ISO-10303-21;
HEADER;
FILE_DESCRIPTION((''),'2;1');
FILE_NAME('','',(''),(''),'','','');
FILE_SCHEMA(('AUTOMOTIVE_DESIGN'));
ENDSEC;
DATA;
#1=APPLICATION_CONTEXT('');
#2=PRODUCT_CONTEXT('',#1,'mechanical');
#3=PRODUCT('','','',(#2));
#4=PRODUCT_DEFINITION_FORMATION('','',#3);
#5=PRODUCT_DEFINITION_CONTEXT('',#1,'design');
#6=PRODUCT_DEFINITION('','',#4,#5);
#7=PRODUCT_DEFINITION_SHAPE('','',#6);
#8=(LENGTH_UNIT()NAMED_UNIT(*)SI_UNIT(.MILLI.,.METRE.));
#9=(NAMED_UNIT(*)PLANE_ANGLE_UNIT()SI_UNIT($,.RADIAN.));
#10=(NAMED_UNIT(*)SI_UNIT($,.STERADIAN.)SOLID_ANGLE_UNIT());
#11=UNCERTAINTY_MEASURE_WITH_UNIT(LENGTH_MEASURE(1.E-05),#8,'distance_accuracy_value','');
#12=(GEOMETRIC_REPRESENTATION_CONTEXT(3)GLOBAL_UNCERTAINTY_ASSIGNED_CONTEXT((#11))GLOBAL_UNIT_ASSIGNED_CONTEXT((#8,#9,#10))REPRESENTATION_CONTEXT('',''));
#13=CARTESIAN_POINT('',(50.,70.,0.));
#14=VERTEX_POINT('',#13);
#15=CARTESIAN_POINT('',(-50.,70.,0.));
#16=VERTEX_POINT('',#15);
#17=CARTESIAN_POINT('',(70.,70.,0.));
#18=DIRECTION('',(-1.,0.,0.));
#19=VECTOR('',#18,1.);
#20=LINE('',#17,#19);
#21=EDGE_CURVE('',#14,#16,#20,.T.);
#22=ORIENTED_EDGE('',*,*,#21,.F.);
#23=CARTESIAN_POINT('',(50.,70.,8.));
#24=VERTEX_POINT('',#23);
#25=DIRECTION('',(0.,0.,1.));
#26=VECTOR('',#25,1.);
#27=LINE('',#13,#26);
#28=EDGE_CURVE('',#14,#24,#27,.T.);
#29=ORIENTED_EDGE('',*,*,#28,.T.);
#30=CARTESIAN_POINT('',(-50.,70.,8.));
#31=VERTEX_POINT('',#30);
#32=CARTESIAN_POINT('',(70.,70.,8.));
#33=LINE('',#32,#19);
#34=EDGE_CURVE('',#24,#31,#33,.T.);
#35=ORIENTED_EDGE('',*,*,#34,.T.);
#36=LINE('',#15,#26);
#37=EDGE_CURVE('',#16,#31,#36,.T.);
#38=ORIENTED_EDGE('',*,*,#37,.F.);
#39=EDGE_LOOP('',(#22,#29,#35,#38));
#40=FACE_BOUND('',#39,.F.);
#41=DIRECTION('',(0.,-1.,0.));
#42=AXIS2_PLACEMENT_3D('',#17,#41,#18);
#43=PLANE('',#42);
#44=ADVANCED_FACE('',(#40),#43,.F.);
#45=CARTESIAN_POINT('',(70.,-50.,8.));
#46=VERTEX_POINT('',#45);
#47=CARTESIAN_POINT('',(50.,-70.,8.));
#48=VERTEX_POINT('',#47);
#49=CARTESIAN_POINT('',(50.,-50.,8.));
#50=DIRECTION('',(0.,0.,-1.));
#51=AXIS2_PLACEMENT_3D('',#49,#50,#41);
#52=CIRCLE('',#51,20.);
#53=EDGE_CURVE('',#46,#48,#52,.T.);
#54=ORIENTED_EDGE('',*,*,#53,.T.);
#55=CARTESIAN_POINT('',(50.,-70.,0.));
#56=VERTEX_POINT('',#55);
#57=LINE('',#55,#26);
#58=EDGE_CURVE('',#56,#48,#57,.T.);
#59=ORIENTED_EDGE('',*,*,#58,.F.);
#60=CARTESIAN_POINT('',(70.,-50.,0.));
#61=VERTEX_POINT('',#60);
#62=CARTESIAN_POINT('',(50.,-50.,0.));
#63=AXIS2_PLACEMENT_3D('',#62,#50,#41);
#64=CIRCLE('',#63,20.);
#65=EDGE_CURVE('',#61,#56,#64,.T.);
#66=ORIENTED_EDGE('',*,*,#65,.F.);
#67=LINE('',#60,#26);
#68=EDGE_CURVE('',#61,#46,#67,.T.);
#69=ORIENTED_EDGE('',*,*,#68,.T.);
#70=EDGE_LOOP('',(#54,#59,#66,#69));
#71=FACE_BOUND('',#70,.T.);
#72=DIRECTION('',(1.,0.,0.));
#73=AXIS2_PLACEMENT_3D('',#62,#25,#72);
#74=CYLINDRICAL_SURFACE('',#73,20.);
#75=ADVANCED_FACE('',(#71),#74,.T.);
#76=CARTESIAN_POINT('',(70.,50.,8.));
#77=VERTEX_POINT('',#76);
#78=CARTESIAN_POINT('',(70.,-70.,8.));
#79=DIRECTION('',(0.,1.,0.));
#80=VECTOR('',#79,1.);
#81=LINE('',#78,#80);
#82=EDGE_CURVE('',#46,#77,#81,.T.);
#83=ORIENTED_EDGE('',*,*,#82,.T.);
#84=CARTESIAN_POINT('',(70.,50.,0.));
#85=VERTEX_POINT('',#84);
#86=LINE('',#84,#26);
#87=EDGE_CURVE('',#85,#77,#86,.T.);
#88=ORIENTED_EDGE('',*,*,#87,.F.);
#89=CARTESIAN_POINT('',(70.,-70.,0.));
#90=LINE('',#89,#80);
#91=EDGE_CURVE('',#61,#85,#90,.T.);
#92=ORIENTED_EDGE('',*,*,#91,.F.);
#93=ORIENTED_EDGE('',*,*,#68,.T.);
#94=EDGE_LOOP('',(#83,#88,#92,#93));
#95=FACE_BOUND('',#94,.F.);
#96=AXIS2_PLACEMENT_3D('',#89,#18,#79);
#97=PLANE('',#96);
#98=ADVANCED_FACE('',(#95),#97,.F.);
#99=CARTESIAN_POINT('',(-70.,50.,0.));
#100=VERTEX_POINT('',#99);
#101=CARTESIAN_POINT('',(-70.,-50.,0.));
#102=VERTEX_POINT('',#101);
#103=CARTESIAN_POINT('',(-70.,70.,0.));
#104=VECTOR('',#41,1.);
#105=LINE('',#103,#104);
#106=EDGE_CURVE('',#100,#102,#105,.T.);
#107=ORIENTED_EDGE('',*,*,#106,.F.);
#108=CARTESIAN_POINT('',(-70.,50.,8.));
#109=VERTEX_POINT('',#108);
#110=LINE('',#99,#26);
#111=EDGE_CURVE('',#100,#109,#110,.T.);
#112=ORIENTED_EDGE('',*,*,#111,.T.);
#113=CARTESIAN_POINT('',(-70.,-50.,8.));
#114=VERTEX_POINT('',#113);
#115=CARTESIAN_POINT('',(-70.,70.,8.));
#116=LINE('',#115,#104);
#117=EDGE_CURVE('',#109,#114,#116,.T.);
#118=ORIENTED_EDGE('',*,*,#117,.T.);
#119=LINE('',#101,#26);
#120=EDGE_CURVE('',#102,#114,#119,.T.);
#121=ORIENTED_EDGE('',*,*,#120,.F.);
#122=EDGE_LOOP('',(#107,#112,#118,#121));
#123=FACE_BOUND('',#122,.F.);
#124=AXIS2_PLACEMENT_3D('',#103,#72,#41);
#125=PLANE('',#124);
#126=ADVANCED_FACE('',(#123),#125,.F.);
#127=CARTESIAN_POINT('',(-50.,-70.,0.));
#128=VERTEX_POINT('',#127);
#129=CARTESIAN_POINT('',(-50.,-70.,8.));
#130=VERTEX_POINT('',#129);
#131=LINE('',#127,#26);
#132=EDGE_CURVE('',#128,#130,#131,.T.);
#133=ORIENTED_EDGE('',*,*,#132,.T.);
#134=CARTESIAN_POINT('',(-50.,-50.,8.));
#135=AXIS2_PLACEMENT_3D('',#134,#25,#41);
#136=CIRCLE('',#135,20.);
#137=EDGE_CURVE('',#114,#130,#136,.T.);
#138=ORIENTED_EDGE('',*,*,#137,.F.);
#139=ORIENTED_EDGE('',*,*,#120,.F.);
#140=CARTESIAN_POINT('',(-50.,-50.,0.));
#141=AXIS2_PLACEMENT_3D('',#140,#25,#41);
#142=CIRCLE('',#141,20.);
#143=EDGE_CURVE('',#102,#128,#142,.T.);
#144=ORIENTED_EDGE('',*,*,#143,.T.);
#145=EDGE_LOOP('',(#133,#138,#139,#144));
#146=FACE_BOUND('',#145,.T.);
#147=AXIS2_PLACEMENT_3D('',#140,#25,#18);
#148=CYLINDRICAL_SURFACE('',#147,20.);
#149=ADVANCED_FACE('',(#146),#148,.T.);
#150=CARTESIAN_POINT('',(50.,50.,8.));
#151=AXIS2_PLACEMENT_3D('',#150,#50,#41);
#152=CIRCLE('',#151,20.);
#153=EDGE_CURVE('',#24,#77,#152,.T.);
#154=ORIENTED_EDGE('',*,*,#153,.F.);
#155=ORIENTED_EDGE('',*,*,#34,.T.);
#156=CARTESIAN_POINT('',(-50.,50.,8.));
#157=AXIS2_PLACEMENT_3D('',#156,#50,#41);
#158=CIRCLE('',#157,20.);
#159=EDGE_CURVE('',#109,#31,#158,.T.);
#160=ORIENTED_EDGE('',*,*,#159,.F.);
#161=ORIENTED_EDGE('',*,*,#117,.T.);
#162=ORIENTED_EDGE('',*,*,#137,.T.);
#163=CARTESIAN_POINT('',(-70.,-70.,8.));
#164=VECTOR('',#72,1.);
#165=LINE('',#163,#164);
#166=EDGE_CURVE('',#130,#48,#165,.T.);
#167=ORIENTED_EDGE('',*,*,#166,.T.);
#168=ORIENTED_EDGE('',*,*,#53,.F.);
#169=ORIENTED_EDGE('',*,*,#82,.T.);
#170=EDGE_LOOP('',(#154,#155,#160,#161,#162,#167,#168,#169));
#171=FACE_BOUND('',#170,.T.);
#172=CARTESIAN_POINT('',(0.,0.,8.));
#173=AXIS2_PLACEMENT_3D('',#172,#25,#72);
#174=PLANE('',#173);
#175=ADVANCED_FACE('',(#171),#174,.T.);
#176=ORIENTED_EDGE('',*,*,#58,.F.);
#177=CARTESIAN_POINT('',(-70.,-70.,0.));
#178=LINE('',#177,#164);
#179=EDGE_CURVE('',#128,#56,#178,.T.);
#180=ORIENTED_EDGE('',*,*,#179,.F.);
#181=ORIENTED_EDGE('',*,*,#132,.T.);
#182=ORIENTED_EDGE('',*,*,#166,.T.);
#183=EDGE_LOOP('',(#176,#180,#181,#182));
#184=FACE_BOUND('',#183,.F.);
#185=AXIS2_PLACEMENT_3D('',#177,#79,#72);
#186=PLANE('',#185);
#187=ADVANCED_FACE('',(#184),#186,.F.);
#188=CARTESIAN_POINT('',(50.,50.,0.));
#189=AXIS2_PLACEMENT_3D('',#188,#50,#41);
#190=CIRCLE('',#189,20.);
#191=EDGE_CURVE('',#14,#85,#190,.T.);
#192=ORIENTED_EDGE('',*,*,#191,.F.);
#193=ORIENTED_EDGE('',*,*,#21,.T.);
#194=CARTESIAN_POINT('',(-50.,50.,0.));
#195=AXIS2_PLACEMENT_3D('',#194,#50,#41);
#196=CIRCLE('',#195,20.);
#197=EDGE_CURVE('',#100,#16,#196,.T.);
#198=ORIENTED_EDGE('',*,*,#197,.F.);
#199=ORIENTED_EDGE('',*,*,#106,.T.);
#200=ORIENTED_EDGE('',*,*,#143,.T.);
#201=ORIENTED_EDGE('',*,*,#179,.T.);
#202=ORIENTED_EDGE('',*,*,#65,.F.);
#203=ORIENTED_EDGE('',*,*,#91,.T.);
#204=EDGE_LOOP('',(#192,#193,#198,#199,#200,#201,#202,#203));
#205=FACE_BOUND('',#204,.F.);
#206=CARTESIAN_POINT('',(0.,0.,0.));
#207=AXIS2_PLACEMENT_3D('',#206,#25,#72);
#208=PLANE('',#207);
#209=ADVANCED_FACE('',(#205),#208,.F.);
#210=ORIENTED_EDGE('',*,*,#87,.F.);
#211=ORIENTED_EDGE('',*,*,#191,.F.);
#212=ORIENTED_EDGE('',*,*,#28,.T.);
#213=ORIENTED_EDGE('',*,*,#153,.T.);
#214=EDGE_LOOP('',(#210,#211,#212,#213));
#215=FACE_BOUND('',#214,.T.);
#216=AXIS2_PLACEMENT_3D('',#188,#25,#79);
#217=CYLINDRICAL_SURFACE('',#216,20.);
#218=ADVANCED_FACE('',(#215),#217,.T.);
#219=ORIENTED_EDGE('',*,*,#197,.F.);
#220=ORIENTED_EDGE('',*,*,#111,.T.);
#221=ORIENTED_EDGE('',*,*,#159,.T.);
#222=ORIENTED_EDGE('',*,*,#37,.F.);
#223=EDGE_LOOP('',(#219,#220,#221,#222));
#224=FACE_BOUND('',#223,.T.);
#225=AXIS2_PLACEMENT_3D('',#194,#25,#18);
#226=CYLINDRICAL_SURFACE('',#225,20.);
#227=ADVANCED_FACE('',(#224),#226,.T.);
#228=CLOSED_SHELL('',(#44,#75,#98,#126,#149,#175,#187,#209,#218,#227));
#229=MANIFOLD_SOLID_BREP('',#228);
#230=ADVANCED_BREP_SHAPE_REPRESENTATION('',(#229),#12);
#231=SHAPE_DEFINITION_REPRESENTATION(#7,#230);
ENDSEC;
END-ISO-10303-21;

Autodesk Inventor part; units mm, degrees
ref_plane "YZ Plane" through (0, 0, 0) normal (1, 0, 0) x (0, 1, 0)
ref_plane "XZ Plane" through (0, 0, 0) normal (0, 1, 0) x (-1, 0, 0)
ref_plane "XY Plane" through (0, 0, 0) normal (0, 0, 1) x (1, 0, 0)
sketch "Sketch1" plane through (0, 0, 0) normal (0, 0, 1) x (1, 0, 0)
  line L0 (-70, -70) -> (70, -70)
  line L1 (70, -70) -> (70, 70)
  line L2 (70, 70) -> (-70, 70)
  line L3 (-70, 70) -> (-70, -70)
  line L4 (-70, -70) -> (70, 70) construction
  line L5 (70, -70) -> (-70, 70) construction
  point P0 (0, 0)
  dimension "d0" = 140
  dimension "d1" = 140
extrude "Plate1" add sketch "Sketch1" along normal blind 8
fillet "Corner Round1" radius 20 4 edges at (70, -70, 4) (-70, -70, 4) (-70, 70, 4) (70, 70, 4)
equation "\"d0\" = d1"
equation "\"d2\" = Thickness"
equation "\"BendReliefWidth\" = Thickness"
equation "\"BendReliefDepth\" = 0.5 * Thickness"
equation "\"CornerReliefSize\" = 4 * Thickness"
equation "\"MinimumRemnant\" = 2 * Thickness"
equation "\"TransitionRadius\" = BendRadius"
equation "\"JacobiRadiusSize\" = BendRadius"
equation "\"GapSize\" = Thickness"
equation "\"Thickness\" = 8"
equation "\"BendRadius\" = 5"
properties part number "PNS-782 leg plate for filter" material "Steel"
